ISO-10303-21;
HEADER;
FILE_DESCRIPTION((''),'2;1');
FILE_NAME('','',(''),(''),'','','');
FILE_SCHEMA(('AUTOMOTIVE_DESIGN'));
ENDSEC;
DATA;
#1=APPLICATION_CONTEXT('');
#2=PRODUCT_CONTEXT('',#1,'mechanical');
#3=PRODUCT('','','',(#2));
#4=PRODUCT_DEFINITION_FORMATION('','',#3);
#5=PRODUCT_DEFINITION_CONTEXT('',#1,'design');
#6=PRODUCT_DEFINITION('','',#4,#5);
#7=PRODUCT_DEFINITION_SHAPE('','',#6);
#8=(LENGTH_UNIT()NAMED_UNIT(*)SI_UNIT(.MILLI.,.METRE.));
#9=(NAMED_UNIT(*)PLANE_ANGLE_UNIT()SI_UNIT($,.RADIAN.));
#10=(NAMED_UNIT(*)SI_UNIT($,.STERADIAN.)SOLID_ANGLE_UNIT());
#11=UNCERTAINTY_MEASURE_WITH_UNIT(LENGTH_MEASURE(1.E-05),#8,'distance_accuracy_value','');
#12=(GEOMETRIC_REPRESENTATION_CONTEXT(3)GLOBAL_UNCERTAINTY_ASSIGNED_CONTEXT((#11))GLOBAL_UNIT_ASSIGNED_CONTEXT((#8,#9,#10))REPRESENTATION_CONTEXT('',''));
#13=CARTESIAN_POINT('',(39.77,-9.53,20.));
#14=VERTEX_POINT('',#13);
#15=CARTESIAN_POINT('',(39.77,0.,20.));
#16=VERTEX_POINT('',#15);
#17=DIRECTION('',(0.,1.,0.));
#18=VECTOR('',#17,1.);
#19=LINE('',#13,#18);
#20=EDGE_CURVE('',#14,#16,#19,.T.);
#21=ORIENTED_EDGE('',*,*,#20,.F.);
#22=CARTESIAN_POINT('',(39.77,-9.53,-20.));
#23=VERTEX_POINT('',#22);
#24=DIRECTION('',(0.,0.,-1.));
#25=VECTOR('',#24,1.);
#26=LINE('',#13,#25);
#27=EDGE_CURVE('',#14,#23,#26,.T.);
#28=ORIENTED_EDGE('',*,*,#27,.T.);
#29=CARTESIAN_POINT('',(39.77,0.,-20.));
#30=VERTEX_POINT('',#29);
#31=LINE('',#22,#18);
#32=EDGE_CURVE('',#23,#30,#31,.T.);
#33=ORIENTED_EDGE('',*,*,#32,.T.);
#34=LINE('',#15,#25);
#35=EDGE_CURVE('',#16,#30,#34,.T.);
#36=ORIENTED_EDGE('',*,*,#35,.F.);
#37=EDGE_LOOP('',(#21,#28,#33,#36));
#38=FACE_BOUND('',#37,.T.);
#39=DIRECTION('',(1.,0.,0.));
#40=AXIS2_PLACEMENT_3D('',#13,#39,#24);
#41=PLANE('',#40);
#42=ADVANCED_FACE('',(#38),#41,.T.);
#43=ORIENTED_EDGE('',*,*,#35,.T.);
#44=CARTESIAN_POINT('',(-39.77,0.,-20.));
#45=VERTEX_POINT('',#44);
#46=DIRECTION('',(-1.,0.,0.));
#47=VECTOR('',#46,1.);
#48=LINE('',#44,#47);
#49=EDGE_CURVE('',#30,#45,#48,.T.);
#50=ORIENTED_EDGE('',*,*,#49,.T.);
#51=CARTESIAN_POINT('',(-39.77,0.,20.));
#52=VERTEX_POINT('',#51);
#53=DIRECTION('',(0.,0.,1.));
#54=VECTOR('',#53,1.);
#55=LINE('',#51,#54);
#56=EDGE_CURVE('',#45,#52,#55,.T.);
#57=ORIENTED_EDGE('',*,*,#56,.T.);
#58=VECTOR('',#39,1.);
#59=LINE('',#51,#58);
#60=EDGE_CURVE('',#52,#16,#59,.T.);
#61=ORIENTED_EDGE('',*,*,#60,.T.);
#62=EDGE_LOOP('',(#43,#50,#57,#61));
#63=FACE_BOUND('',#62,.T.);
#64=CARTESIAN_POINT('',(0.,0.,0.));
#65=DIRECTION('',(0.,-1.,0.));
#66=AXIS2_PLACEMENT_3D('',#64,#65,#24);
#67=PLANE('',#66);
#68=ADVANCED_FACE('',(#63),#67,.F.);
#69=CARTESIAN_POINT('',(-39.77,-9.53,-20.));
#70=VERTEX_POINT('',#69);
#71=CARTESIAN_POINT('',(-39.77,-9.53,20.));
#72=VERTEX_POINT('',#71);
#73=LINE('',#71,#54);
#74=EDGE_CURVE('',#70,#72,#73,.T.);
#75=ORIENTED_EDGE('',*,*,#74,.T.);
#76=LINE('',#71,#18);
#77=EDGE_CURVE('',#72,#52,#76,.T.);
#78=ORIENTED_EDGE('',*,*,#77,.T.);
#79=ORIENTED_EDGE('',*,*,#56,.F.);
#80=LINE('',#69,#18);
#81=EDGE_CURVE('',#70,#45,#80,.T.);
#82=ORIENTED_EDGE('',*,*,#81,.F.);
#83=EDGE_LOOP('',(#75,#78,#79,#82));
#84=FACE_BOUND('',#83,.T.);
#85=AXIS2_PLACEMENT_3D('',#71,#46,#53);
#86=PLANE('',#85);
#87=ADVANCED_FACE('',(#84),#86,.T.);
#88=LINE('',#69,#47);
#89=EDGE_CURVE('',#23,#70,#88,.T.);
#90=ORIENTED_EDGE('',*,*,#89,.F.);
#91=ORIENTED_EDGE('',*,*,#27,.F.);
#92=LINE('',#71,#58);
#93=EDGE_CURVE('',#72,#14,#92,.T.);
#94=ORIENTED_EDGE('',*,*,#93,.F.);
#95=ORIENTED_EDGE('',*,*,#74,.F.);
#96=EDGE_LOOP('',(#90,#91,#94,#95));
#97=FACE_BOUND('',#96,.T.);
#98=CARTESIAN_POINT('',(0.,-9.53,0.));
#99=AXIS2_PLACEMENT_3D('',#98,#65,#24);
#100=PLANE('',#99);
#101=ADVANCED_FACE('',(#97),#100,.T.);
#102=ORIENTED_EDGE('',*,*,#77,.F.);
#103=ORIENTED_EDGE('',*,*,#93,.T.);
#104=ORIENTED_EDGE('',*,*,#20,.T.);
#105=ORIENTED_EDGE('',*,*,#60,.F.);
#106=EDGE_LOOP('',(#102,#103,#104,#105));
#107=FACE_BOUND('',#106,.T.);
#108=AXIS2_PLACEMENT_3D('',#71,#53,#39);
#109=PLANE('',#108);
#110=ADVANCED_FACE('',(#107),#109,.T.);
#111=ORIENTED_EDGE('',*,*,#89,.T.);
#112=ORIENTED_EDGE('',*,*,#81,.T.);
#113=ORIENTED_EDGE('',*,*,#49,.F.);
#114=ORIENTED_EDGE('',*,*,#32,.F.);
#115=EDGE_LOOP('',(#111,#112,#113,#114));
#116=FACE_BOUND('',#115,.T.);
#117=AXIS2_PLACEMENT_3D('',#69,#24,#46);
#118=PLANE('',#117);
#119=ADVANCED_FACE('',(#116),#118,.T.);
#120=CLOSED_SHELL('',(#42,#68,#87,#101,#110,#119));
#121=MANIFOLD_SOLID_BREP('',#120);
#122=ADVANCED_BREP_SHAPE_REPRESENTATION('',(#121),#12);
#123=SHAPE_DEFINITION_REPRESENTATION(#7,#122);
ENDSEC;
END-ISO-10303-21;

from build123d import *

# Parameters (mm, degrees)
ESBO_O1_W          = 79.54
ESBO_O1_H          = 40
FLANGE_BASE1_DEPTH = 9.53


# Sheet-metal steps are written as plain solids
with BuildPart() as part:
    # Esboço1 → Flange-base1 (new body)
    with BuildSketch(Plane(origin=(0, 0, 0), x_dir=(1, 0, 0), z_dir=(0, 1, 0))):
        Rectangle(ESBO_O1_W, ESBO_O1_H)
    extrude(amount=-FLANGE_BASE1_DEPTH)


solid = part.part
